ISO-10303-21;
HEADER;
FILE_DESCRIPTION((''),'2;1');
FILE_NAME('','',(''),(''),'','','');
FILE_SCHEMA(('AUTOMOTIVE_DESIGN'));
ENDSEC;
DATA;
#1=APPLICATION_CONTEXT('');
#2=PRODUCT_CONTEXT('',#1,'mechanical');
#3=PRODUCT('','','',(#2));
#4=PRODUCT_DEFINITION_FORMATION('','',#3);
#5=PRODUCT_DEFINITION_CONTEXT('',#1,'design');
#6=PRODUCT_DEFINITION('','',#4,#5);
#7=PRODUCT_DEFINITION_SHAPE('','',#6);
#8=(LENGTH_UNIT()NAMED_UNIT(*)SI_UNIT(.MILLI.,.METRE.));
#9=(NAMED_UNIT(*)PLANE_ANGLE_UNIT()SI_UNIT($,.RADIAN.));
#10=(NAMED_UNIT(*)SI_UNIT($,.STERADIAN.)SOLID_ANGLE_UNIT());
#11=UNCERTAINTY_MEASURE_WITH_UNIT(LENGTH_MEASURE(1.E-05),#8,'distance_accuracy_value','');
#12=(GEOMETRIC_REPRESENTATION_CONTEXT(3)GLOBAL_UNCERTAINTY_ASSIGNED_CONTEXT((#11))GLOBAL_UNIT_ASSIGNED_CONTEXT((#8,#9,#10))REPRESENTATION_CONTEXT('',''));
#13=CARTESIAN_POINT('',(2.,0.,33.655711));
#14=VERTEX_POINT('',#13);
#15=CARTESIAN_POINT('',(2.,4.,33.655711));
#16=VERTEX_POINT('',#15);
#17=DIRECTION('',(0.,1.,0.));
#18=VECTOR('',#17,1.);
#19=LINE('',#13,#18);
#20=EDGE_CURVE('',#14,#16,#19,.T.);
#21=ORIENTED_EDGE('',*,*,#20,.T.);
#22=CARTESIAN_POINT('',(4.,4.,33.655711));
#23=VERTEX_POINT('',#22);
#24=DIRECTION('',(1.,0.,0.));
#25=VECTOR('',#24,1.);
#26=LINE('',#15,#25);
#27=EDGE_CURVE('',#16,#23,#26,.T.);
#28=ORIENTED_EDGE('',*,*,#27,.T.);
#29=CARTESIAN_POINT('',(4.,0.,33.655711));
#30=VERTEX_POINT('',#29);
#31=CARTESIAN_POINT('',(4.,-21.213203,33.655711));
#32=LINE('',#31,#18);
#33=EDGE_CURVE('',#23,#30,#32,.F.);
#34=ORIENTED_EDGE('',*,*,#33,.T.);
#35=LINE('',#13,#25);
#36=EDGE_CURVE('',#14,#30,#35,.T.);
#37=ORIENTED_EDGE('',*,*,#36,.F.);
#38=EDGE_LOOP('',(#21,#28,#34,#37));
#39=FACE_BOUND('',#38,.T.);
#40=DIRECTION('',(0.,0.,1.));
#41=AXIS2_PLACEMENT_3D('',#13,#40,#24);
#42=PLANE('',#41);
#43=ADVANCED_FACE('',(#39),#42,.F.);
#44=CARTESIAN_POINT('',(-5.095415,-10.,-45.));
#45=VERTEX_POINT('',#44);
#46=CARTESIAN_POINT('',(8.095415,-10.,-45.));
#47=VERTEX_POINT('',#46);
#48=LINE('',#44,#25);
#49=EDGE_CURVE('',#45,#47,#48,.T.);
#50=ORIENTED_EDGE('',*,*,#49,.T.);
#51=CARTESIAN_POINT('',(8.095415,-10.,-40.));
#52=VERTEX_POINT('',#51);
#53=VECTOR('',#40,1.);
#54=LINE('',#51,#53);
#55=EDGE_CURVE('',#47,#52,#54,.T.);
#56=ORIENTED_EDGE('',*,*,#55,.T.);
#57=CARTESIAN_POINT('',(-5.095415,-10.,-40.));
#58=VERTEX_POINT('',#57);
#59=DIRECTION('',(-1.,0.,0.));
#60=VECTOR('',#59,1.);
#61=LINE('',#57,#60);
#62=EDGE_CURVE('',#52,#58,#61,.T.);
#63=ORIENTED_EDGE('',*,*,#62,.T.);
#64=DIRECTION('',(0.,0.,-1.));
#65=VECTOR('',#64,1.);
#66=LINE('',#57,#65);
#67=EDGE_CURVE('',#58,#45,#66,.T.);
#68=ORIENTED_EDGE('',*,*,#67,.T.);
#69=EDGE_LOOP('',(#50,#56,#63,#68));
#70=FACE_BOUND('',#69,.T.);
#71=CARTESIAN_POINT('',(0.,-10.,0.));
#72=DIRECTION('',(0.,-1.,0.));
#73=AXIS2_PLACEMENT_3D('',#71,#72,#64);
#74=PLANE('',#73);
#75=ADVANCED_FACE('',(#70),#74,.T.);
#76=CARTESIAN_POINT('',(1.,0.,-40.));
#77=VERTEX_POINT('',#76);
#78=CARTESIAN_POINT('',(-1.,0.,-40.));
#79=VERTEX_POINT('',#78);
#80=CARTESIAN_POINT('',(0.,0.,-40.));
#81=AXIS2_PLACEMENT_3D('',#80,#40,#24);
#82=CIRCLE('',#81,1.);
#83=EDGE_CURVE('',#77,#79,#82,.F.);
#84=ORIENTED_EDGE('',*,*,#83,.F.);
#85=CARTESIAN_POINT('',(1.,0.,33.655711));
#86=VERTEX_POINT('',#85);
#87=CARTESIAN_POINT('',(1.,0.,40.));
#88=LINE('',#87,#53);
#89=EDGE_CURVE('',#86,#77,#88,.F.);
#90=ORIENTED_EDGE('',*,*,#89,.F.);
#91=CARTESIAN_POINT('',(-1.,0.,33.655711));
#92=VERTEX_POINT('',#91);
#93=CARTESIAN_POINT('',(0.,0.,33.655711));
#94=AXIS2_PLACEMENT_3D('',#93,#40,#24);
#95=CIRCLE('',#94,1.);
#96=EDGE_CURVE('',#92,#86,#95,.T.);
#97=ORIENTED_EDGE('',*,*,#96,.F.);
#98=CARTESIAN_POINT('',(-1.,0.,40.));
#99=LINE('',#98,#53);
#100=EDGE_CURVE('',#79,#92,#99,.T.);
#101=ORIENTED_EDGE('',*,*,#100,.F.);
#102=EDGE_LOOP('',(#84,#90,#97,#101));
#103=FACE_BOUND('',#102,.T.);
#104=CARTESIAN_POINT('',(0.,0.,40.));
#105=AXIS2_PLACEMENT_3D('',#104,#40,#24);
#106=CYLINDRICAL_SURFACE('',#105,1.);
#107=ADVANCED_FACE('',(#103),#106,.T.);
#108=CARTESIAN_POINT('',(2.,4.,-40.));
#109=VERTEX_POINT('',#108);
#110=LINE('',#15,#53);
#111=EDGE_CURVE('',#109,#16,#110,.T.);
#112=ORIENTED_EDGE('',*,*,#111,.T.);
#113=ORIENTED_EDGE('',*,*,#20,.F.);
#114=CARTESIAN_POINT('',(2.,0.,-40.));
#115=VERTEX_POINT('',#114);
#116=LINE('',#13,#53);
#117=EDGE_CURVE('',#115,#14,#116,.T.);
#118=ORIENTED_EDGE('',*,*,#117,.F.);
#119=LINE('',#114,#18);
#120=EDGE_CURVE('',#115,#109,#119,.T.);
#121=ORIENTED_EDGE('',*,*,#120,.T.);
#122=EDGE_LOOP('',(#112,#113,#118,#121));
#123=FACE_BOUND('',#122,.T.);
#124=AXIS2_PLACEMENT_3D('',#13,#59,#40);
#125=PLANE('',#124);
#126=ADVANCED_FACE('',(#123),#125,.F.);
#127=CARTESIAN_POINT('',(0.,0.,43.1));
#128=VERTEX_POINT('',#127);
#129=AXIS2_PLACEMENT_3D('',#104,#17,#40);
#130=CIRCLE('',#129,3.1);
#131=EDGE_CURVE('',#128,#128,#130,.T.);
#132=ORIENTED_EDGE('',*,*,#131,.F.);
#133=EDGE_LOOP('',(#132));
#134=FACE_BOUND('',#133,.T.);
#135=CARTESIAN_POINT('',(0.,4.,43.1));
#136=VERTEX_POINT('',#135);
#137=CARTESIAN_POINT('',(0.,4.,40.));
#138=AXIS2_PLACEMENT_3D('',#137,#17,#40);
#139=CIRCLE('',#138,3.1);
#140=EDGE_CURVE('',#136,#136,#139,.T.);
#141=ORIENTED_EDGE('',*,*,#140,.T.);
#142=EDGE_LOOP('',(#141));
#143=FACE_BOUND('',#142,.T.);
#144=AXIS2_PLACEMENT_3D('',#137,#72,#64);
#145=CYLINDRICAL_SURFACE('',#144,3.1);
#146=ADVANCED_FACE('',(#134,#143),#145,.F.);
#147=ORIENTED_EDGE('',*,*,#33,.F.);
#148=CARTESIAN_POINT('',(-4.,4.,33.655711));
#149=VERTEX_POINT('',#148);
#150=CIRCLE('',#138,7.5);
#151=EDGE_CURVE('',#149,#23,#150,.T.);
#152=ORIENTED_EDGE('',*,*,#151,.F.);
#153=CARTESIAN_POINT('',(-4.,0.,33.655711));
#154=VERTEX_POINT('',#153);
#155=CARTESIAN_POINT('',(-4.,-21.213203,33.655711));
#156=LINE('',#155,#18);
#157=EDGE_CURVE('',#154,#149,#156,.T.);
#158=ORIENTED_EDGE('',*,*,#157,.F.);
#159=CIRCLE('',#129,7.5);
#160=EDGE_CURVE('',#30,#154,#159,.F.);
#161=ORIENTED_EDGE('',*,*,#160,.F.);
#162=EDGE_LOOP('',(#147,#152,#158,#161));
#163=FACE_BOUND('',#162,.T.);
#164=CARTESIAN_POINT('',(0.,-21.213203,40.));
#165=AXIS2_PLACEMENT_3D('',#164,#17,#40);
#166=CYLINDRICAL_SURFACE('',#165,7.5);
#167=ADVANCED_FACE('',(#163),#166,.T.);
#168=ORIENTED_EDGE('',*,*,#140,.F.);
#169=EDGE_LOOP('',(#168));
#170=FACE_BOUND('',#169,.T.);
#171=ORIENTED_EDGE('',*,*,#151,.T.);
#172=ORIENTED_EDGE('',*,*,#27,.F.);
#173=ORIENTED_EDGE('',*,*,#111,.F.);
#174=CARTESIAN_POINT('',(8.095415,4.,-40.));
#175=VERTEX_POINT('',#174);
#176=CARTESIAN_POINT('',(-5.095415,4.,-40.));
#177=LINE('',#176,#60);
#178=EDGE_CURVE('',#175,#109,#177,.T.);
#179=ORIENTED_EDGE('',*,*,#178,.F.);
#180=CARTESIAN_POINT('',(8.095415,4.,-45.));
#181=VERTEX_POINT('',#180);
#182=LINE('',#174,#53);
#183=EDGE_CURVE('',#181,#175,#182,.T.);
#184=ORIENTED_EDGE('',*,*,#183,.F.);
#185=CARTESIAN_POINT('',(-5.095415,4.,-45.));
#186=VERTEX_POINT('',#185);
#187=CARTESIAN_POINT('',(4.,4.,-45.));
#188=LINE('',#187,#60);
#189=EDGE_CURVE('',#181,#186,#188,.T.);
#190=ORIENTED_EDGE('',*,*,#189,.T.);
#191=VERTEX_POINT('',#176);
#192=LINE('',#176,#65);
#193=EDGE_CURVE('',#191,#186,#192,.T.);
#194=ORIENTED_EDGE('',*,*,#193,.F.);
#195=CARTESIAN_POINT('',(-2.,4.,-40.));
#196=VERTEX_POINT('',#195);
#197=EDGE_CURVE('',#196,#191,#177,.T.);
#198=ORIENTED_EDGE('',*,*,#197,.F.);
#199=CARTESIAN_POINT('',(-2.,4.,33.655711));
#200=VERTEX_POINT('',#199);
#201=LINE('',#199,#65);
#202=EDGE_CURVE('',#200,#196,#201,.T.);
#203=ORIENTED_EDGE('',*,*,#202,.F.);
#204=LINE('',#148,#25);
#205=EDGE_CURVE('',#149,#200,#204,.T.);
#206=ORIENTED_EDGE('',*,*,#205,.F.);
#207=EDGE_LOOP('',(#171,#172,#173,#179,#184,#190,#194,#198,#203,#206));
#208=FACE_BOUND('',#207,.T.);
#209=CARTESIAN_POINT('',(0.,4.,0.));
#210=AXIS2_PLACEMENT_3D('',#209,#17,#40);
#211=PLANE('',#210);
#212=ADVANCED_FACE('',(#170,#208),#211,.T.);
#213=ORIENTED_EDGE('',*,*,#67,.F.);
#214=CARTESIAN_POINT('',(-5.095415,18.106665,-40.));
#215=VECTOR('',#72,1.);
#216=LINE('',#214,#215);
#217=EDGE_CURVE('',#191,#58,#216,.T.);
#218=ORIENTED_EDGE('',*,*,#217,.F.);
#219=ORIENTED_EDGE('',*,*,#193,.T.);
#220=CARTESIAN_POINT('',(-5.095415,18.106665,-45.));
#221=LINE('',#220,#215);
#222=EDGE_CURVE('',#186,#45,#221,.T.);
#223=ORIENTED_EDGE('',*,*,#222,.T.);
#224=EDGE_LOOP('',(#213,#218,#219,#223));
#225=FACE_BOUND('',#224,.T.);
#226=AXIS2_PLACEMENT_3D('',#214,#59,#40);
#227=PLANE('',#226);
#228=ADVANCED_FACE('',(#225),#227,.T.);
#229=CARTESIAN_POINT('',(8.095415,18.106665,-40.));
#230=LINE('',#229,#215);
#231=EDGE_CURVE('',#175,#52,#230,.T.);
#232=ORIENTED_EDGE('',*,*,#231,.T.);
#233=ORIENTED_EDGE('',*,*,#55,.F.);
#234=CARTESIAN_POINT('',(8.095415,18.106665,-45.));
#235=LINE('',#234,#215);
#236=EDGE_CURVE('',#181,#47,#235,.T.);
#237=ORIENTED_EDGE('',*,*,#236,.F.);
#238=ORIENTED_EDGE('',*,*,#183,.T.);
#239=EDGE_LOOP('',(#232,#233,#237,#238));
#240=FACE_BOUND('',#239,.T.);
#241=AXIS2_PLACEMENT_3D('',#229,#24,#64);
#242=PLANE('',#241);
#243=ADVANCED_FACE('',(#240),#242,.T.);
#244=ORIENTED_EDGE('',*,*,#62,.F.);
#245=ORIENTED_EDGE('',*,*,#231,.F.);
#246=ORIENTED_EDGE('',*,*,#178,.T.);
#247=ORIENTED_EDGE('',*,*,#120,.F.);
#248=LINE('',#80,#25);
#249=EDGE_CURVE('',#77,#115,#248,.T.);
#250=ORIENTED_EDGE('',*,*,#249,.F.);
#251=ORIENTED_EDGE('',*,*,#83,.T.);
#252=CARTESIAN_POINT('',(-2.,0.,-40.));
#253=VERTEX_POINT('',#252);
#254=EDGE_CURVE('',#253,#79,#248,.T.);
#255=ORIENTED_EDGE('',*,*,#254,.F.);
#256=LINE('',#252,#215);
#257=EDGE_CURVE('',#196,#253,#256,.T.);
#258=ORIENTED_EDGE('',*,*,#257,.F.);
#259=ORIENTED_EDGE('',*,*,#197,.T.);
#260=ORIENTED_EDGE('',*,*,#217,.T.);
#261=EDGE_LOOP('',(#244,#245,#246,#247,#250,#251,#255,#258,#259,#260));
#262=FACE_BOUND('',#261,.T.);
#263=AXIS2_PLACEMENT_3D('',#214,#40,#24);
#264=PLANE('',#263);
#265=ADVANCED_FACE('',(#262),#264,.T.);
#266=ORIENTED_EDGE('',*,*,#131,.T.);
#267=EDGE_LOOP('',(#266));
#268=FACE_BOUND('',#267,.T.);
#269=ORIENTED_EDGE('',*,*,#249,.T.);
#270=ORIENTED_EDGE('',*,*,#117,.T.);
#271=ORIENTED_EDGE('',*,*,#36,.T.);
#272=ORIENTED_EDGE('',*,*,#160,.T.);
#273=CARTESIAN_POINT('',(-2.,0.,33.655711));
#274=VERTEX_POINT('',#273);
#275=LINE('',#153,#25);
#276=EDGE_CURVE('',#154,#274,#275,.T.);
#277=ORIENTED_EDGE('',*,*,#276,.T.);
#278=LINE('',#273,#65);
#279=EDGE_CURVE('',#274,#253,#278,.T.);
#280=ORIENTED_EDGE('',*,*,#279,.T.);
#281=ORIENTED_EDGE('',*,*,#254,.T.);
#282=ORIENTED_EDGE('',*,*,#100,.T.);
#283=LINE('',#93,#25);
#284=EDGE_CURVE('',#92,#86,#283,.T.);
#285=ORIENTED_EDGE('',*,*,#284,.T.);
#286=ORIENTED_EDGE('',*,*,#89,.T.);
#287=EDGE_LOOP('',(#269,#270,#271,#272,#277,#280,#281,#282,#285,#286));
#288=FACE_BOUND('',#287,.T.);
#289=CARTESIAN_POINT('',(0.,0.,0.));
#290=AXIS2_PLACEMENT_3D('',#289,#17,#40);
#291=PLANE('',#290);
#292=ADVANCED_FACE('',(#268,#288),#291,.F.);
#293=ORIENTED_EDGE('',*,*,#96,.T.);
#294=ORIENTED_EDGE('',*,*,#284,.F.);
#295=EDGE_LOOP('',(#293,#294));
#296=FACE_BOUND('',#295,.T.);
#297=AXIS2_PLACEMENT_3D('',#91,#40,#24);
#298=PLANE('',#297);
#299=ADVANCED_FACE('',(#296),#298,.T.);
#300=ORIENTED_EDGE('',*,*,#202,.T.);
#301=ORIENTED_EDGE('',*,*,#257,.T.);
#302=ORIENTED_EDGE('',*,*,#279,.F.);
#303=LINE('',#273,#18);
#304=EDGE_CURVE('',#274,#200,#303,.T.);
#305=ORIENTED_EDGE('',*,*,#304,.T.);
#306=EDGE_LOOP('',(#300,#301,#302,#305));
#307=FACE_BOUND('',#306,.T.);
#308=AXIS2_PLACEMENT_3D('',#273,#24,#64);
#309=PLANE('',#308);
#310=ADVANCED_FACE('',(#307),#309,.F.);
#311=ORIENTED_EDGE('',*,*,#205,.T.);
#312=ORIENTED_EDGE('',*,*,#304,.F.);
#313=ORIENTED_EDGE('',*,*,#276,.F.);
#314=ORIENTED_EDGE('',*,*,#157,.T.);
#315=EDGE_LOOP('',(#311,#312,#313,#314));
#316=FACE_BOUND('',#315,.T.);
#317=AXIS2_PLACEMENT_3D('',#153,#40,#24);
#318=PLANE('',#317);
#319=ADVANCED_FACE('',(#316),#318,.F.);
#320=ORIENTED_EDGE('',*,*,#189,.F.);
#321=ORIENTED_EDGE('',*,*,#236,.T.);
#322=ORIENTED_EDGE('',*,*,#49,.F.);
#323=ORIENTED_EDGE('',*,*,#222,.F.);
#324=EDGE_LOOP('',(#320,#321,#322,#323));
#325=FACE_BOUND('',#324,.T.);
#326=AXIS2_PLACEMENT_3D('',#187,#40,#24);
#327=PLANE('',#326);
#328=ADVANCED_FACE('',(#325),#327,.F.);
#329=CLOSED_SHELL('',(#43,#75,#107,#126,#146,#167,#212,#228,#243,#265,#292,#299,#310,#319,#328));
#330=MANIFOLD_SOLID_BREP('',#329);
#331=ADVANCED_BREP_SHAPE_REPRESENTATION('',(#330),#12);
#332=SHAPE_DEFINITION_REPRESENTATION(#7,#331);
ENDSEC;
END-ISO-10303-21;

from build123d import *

# Parameters (mm, degrees)
SKETCH1_W                       = 8
SKETCH1_H                       = 90
SKETCH1_R                       = 3.1
BOSS_EXTRUDE1_DEPTH             = 4
FILLET1_R                       = 4
BOSS_EXTRUDE2_START             = -4
SKETCH2_R                       = 7.5
SKETCH2_R_2                     = 3.1
BOSS_EXTRUDE2_DEPTH             = 4
SKETCH3_W                       = 2
SKETCH3_H                       = 78.65571123
CUT_EXTRUDE2_DEPTH              = 49.254533466
SKETCH4_W                       = 1
SKETCH4_H                       = 78.65571123
SKETCH5_W                       = 13.19082965
SKETCH5_H                       = 5
BOSS_EXTRUDE5_DEPTH             = 10
BOSS_EXTRUDE5_DIRECTION_2_REACH = 50.255


with BuildPart() as part:
    # Sketch1 → Boss-Extrude1 (new body)
    with BuildSketch(Plane(origin=(0, 0, 0), x_dir=(1, 0, 0), z_dir=(0, 1, 0))):
        Rectangle(SKETCH1_W, SKETCH1_H)
        with Locations(Location((0, -40, 0), (0, 0, 270))):
            Circle(SKETCH1_R, mode=Mode.SUBTRACT)
    extrude(amount=BOSS_EXTRUDE1_DEPTH)

    # Fillet1
    fillet1_edges = [part.edges().sort_by_distance(p)[0] for p in [
        (-4, 2, 45),
        (4, 2, 45),
    ]]
    fillet(fillet1_edges, radius=FILLET1_R - 0.0001)  # a hair under: the kernel refuses the full size

    # Sketch2 → Boss-Extrude2 (add)
    with BuildSketch(Plane(origin=(0, 4, 0), x_dir=(1, 0, 0), z_dir=(0, 1, 0)).offset(BOSS_EXTRUDE2_START)):
        with Locations((0, -40)):
            Circle(SKETCH2_R)
        with Locations(Location((0, -40, 0), (0, 0, 270))):
            Circle(SKETCH2_R_2, mode=Mode.SUBTRACT)
    extrude(amount=BOSS_EXTRUDE2_DEPTH)

    # Sketch3 → Cut-Extrude2 (cut, through all)
    with BuildSketch(Plane(origin=(0, 4, 0), x_dir=(1, 0, 0), z_dir=(0, 1, 0))):
        with Locations((3, 5.672144385)):
            Rectangle(SKETCH3_W, SKETCH3_H)
        with Locations((-3, 5.672144385)):
            Rectangle(SKETCH3_W, SKETCH3_H)
    extrude(amount=-CUT_EXTRUDE2_DEPTH, mode=Mode.SUBTRACT)

    # Sketch4 → Revolve1 (revolve)
    with BuildSketch(Plane.XZ):
        with Locations((-0.5, -5.672144385)):
            Rectangle(SKETCH4_W, SKETCH4_H)
    revolve(axis=Axis((0, 0, 40), (0, 0, -1)))

    # Sketch5 → Boss-Extrude5 (add)
    with BuildSketch(Plane.XZ):
        with Locations((1.5, -42.5)):
            Rectangle(SKETCH5_W, SKETCH5_H)
    extrude(amount=BOSS_EXTRUDE5_DEPTH)

    # Boss-Extrude5 direction 2: up to this face of the body (flat: up to its plane)
    boss_extrude5_direction_2_end = Plane(part.part.faces().sort_by_distance((0, 4, 8.504231921))[0])
    # Sketch5 → Boss-Extrude5 direction 2 (add, up to the picked face)
    with BuildSketch(Plane.XZ, mode=Mode.PRIVATE) as boss_extrude5_direction_2_sk1:
        with Locations((1.5, -42.5)):
            Rectangle(SKETCH5_W, SKETCH5_H)
    boss_extrude5_direction_2_tool1 = split(extrude(boss_extrude5_direction_2_sk1.sketch, amount=-BOSS_EXTRUDE5_DIRECTION_2_REACH, mode=Mode.PRIVATE), bisect_by=boss_extrude5_direction_2_end, keep=Keep.BOTH, mode=Mode.PRIVATE)
    add(boss_extrude5_direction_2_tool1.solids().sort_by(Axis((1.5, 0, -42.5), (0, 1, 0)))[0])


solid = part.part
